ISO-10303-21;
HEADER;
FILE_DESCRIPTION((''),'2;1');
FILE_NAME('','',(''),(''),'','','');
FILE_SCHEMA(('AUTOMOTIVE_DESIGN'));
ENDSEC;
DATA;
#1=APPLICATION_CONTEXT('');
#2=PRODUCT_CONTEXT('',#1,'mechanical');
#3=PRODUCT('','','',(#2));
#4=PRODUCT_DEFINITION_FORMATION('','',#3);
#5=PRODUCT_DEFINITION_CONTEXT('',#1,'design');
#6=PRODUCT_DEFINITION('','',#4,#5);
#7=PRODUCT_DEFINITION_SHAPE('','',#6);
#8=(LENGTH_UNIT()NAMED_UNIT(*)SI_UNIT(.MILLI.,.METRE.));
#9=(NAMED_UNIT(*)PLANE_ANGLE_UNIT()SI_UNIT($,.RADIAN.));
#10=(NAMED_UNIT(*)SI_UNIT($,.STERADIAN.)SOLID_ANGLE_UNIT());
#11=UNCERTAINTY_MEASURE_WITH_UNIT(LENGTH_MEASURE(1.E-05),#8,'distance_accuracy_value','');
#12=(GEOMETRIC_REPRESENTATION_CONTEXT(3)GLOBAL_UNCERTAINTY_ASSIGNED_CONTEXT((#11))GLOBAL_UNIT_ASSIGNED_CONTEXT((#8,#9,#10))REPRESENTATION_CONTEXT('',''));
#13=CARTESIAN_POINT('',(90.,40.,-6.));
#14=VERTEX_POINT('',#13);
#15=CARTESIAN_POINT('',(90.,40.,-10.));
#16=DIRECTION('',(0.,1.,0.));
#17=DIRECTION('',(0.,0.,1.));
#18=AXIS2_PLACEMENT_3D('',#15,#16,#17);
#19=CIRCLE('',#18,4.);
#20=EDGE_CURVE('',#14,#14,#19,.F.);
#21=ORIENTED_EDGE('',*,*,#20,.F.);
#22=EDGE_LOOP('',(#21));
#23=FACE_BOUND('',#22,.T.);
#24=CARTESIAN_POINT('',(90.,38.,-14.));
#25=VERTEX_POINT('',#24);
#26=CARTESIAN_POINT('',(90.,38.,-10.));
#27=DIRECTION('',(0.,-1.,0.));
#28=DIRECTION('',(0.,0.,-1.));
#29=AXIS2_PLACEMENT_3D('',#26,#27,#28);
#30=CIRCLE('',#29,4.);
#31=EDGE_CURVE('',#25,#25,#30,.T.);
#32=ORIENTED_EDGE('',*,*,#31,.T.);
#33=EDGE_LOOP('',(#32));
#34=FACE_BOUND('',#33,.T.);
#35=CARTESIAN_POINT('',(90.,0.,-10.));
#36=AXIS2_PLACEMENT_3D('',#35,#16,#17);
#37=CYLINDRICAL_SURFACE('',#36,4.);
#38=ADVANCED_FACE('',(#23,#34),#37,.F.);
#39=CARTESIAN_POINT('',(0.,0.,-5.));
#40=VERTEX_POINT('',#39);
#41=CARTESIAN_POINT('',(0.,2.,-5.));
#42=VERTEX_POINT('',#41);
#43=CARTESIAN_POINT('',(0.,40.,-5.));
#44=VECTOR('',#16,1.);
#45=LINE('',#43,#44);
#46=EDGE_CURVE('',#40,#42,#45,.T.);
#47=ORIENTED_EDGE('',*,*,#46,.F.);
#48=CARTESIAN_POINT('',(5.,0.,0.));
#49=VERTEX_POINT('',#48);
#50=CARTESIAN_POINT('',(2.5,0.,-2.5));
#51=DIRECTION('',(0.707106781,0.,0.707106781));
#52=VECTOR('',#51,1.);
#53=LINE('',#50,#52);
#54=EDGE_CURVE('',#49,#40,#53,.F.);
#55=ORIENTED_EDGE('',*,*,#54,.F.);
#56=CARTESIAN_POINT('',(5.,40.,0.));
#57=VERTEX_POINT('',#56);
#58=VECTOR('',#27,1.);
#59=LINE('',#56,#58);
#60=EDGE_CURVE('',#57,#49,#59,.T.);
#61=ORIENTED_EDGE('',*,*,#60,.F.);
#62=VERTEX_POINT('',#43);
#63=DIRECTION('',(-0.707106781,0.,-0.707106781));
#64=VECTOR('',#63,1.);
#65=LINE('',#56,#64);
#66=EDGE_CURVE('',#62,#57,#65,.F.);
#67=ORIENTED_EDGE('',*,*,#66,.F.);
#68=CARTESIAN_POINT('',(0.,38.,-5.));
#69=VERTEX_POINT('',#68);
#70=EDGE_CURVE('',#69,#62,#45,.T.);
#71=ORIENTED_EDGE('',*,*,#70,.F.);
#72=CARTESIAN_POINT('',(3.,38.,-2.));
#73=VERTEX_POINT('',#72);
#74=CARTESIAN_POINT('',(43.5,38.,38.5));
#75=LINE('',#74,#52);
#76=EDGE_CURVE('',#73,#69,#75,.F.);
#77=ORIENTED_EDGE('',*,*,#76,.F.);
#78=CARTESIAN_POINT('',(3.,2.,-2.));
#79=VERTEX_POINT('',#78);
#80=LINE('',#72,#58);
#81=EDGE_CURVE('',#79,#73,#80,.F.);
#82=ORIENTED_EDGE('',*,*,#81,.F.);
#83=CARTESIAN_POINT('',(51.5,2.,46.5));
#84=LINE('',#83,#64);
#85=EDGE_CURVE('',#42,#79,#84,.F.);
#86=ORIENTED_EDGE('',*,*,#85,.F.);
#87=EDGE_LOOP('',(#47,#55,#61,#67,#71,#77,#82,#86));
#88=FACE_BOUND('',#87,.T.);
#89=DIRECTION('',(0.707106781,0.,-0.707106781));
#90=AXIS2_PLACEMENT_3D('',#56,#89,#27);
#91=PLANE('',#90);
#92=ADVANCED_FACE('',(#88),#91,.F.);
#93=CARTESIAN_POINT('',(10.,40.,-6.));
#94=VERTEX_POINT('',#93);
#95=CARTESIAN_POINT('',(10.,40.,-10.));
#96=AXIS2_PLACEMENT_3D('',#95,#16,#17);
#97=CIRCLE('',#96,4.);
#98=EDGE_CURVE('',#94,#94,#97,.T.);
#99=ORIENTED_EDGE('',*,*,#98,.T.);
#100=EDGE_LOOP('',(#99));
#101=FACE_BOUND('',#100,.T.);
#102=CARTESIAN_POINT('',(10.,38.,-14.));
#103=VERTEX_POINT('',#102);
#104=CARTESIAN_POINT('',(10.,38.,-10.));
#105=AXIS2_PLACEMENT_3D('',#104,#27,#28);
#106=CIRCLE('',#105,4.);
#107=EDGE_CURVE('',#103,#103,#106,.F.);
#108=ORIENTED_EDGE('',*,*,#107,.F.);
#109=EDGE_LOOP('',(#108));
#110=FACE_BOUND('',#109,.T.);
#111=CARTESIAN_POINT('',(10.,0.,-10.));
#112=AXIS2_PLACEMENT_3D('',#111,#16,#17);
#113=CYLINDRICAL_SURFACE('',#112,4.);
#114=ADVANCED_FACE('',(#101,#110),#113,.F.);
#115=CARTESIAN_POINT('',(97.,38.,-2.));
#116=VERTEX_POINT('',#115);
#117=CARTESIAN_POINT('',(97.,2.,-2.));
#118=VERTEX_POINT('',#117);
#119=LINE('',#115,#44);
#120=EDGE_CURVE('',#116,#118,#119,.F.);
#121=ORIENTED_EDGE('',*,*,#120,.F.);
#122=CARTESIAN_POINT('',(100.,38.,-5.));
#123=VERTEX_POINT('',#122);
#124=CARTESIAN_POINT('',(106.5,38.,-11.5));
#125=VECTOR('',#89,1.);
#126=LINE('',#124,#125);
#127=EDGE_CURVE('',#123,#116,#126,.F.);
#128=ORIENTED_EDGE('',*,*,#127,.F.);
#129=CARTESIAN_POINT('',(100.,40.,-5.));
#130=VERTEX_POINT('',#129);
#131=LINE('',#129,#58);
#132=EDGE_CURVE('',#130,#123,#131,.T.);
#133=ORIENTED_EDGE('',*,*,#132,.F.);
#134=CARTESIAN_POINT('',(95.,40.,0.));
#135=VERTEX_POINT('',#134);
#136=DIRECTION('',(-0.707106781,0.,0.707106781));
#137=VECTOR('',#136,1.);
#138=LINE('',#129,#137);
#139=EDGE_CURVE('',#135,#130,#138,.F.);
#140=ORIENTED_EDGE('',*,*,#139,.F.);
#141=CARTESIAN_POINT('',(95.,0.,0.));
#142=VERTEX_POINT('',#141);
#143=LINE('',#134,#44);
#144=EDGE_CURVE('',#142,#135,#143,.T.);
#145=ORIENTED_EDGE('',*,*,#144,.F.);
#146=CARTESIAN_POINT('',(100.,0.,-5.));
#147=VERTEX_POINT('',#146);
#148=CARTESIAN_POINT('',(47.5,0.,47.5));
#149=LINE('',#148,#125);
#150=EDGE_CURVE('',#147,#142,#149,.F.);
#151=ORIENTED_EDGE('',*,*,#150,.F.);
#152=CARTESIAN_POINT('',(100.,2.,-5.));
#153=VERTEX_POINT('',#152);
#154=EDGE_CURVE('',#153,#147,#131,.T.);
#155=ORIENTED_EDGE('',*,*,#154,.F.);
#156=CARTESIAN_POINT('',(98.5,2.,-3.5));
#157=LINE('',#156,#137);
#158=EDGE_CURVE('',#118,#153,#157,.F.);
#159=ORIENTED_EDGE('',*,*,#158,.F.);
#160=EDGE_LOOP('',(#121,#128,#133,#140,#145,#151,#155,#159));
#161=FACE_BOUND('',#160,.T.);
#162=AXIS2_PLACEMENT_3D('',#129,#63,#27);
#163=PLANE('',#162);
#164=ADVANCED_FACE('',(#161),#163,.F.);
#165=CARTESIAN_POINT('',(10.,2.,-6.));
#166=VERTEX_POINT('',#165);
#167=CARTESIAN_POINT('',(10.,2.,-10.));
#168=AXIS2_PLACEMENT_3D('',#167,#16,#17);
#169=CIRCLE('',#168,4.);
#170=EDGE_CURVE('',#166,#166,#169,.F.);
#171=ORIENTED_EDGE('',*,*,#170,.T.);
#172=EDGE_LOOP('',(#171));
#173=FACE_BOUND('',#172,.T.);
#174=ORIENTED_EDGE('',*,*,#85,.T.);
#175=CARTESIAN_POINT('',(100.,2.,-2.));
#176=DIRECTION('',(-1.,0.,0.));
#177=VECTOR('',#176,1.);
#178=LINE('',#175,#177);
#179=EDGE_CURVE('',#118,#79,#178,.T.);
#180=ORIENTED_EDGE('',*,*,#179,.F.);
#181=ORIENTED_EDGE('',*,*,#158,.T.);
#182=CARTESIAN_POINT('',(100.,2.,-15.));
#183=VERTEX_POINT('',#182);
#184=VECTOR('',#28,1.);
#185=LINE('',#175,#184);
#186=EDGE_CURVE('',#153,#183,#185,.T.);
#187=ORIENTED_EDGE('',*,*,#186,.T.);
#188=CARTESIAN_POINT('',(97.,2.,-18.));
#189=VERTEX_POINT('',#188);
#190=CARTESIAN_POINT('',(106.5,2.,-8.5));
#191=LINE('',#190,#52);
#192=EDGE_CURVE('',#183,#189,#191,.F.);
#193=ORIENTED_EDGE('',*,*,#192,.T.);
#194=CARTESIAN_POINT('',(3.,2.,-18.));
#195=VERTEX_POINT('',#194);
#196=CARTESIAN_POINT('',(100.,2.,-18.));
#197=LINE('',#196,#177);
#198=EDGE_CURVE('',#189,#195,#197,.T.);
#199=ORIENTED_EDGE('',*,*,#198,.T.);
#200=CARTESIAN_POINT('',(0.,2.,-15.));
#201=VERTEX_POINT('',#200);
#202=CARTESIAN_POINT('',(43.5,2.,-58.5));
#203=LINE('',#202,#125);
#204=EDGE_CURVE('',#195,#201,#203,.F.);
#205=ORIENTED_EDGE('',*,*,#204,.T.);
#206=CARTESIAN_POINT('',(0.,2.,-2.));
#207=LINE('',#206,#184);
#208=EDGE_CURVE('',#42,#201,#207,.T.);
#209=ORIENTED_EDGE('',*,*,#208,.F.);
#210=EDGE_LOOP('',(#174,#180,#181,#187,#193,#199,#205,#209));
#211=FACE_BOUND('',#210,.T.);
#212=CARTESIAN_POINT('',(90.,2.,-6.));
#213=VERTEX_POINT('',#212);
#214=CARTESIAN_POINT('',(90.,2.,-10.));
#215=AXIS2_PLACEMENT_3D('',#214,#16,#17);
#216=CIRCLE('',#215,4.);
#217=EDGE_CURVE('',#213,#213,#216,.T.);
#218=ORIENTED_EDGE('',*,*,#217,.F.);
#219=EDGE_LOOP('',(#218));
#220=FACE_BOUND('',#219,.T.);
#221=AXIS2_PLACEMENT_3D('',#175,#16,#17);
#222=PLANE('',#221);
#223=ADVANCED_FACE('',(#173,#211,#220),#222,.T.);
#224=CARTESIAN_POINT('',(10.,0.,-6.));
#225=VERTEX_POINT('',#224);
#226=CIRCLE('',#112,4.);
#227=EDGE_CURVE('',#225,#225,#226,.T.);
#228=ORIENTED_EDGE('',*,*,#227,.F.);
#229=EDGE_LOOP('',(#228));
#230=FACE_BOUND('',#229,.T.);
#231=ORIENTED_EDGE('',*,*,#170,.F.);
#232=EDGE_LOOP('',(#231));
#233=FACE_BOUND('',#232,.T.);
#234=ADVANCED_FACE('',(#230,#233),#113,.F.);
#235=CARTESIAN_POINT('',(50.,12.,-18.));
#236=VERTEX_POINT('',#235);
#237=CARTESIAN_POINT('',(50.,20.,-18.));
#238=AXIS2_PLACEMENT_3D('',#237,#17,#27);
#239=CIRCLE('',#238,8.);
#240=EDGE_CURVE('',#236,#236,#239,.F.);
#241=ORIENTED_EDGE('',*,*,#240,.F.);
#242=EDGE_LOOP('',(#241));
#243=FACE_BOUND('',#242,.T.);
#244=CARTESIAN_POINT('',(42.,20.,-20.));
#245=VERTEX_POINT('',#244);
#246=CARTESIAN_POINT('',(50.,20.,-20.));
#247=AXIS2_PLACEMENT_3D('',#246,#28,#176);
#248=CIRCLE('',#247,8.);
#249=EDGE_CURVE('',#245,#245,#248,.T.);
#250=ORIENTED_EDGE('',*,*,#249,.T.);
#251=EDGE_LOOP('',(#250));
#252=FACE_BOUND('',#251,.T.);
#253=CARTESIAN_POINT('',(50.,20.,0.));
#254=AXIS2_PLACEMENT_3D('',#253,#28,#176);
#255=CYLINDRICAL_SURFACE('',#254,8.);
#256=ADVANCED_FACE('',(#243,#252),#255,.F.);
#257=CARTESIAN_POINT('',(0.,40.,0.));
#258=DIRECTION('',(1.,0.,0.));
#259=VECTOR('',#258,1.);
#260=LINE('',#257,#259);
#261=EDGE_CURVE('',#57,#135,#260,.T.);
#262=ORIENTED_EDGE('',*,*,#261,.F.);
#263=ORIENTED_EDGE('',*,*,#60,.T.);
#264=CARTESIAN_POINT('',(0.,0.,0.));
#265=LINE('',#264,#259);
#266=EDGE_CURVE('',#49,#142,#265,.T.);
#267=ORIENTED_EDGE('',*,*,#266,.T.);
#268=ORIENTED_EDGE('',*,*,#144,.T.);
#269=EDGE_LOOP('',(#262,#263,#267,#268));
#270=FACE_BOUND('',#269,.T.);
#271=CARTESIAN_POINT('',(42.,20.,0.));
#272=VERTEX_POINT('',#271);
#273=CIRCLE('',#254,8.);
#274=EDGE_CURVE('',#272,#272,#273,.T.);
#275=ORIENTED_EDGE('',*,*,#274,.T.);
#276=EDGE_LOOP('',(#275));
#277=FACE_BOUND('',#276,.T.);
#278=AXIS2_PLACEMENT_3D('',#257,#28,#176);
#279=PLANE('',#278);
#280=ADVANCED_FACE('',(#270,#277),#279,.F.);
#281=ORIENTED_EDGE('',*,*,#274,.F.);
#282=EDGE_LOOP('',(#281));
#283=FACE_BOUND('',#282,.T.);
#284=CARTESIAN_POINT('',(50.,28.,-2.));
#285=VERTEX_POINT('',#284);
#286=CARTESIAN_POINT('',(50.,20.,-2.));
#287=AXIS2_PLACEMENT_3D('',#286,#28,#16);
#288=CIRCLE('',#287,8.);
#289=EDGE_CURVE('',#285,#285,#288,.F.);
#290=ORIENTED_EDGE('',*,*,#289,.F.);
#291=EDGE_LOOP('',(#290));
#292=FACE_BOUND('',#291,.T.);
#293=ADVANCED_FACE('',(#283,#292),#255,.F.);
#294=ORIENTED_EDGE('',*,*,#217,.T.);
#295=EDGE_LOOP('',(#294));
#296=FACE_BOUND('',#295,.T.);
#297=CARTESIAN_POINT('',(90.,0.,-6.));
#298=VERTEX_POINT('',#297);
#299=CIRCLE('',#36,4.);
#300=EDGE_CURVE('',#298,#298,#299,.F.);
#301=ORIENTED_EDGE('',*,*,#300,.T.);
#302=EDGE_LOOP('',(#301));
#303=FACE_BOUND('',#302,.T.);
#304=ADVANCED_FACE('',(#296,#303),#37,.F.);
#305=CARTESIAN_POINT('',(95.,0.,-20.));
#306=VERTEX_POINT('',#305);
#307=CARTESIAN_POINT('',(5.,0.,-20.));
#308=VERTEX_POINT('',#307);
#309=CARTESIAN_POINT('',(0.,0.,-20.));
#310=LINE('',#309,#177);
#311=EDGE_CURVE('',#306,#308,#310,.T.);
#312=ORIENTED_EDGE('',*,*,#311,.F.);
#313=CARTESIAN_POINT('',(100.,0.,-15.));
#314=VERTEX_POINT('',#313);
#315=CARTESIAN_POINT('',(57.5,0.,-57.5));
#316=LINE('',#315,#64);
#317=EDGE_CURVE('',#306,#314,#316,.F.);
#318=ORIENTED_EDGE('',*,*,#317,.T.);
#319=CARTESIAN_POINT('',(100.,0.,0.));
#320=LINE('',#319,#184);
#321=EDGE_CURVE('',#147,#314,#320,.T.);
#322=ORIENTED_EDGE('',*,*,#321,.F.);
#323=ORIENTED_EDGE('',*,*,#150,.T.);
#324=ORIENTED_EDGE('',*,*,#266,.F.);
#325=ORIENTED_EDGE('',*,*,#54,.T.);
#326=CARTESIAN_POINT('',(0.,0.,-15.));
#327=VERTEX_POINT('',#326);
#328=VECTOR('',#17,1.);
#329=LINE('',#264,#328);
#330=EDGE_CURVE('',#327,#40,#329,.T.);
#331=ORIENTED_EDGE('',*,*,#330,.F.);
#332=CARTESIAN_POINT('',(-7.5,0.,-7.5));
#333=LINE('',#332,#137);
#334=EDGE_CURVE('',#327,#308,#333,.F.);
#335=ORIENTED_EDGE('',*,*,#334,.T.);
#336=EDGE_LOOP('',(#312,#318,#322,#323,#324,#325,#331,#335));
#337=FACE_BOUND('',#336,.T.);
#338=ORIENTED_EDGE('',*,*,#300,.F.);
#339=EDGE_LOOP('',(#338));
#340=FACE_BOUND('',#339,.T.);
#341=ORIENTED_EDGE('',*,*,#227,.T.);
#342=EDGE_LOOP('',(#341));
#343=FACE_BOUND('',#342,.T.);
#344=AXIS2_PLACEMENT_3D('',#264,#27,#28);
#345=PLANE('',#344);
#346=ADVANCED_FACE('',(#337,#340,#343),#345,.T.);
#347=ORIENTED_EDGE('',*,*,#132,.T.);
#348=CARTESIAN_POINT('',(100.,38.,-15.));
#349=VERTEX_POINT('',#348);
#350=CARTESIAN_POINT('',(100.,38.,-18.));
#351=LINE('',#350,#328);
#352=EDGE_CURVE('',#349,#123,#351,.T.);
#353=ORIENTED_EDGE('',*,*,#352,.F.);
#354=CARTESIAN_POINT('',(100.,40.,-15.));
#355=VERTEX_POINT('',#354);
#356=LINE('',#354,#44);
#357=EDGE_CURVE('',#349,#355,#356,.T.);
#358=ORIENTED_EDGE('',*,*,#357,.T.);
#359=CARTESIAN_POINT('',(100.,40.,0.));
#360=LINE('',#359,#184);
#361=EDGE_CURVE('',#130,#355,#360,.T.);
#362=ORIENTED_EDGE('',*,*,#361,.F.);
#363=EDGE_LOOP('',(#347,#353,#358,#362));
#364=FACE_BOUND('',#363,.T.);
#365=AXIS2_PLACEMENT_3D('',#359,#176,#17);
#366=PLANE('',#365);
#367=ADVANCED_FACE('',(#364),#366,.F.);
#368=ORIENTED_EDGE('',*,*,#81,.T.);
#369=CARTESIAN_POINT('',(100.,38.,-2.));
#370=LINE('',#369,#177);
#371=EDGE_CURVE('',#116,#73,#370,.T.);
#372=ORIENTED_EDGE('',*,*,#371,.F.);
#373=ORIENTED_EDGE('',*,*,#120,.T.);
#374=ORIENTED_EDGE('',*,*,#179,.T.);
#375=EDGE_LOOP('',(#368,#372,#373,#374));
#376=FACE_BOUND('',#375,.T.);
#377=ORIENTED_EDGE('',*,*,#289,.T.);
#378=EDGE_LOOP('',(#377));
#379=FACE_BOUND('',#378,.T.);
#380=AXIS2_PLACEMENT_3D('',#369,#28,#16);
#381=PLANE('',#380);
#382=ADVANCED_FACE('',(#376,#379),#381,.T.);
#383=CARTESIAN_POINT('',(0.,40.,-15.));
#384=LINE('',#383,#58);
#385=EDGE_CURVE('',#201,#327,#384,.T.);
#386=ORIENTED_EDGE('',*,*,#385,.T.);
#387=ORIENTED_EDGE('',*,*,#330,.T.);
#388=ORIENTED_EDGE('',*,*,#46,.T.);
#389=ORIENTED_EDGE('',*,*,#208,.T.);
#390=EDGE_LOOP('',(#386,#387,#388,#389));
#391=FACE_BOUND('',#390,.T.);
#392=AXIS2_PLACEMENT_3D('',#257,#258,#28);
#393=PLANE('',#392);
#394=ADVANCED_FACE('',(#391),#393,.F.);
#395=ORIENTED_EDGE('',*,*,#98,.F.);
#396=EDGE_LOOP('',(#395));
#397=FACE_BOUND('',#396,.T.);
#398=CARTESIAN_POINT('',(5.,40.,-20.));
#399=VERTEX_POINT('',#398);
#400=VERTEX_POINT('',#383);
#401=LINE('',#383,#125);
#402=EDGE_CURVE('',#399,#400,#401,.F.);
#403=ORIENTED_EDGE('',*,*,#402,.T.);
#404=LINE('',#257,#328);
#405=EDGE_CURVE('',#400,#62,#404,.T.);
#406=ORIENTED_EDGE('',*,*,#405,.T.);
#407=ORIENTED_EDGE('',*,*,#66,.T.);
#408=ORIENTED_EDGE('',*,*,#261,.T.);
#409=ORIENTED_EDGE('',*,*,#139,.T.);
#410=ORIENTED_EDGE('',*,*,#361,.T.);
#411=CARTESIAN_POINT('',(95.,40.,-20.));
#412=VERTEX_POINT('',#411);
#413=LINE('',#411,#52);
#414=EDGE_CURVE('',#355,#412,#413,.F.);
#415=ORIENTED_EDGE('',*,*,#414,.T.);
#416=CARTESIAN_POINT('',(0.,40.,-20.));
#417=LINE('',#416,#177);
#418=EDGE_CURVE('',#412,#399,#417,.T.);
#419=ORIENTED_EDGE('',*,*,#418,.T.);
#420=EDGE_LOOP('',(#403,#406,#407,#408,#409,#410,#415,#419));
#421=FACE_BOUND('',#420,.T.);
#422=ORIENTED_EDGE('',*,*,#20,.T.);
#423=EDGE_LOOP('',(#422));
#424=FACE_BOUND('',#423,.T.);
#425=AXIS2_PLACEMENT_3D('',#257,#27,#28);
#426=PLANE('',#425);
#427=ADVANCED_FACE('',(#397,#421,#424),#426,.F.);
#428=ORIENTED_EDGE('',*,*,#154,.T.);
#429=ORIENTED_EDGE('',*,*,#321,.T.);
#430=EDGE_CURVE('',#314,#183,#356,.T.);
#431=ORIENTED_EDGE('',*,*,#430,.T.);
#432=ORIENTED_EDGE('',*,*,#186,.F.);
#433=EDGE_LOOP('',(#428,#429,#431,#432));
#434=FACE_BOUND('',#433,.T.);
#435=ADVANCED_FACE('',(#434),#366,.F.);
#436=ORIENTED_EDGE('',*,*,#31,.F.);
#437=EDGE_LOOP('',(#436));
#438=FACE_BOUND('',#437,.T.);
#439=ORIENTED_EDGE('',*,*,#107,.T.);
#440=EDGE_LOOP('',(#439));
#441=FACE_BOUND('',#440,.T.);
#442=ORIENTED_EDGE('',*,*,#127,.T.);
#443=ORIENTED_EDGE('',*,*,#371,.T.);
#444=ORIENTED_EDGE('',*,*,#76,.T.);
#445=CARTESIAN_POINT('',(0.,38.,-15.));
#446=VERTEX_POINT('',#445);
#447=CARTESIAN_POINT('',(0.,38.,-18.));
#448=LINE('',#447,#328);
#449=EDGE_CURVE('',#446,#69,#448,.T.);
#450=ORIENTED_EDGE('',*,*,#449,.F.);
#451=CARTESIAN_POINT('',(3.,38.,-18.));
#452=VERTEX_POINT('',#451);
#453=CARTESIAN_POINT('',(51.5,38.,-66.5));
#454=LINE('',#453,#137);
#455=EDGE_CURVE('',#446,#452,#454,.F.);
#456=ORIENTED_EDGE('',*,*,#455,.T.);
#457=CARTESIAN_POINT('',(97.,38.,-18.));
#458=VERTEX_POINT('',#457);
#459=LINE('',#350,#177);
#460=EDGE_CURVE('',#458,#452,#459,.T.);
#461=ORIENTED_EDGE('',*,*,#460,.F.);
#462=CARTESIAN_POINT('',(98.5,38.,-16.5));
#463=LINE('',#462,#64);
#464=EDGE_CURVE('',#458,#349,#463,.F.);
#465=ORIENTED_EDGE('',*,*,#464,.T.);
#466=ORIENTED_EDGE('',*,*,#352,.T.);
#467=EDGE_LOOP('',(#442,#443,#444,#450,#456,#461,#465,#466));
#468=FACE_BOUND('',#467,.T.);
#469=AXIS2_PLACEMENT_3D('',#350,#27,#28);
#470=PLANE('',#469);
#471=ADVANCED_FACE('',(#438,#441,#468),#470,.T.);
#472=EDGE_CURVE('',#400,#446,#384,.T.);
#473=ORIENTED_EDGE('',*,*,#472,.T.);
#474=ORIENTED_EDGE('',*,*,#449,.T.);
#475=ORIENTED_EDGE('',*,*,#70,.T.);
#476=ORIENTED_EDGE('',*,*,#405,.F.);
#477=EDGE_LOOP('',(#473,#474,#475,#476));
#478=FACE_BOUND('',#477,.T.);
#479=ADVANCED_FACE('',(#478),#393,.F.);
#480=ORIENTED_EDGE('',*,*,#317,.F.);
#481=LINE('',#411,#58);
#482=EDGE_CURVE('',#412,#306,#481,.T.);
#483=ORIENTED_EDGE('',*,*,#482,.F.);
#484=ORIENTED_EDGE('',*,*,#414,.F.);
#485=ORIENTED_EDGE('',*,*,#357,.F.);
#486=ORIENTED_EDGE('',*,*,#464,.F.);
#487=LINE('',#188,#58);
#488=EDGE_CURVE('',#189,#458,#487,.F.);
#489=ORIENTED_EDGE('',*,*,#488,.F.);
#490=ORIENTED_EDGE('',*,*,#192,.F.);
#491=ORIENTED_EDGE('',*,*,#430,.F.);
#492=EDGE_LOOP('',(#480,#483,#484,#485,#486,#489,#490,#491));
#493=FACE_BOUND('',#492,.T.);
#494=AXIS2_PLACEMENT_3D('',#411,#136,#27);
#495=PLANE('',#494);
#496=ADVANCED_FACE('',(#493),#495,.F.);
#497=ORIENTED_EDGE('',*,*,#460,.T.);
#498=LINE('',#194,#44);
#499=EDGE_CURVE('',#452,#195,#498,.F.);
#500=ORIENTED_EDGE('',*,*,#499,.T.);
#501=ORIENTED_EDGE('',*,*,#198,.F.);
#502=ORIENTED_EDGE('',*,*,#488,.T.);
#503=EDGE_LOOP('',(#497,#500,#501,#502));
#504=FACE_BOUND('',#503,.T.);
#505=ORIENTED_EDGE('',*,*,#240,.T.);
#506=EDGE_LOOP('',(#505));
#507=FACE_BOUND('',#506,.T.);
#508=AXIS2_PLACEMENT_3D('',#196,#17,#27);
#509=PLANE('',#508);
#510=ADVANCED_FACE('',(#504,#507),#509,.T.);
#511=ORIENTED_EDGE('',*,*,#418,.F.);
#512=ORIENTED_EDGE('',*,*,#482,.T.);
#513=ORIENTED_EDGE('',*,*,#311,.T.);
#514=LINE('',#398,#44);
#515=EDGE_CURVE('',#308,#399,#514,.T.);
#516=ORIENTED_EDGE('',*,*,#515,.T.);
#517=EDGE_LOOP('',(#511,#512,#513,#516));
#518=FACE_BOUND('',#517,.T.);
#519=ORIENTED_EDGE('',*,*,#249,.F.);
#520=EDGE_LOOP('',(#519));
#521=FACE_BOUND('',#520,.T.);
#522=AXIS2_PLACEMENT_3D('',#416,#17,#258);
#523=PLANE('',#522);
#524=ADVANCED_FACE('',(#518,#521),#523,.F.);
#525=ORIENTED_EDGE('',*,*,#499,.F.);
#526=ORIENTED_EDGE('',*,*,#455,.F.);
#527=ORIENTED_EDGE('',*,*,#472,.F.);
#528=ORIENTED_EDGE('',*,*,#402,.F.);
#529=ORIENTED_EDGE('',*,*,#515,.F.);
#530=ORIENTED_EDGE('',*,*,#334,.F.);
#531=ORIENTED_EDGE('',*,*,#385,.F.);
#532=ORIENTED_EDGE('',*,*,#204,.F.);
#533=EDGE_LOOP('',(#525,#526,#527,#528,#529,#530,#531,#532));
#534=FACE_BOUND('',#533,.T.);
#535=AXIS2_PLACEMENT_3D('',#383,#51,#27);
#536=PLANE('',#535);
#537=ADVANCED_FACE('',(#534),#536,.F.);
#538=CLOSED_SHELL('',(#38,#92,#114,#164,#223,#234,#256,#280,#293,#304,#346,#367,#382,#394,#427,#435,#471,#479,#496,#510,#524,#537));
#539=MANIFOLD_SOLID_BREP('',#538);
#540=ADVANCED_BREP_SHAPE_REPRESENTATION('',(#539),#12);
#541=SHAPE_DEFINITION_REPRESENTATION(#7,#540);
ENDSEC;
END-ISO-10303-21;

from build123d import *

# Parameters (mm, degrees)
SKETCH1_W           = 100
SKETCH1_H           = 20
BOSS_EXTRUDE1_DEPTH = 40
SKETCH2_R           = 4
CUT_EXTRUDE1_DEPTH  = 110.544511501
SKETCH3_R           = 8
CUT_EXTRUDE2_DEPTH  = 110.544511501
CUT_EXTRUDE3_DEPTH  = 109.480412979
CHAMFER1_SIZE       = 5


with BuildPart() as part:
    # Sketch1 → Boss-Extrude1 (new body)
    with BuildSketch(Plane(origin=(0, 0, 0), x_dir=(1, 0, 0), z_dir=(0, 1, 0))):
        with Locations((50, 10)):
            Rectangle(SKETCH1_W, SKETCH1_H)
    extrude(amount=BOSS_EXTRUDE1_DEPTH)

    # Sketch2 → Cut-Extrude1 (cut, through all)
    with BuildSketch(Plane(origin=(0, 40, 0), x_dir=(1, 0, 0), z_dir=(0, 1, 0))):
        with Locations(Location((10, 10, 0), (0, 0, 270))):
            Circle(SKETCH2_R)
        with Locations(Location((90, 10, 0), (0, 0, 270))):
            Circle(SKETCH2_R)
    extrude(amount=-CUT_EXTRUDE1_DEPTH, mode=Mode.SUBTRACT)

    # Sketch3 → Cut-Extrude2 (cut, through all)
    with BuildSketch(Plane(origin=(0, 0, -20), x_dir=(-1, 0, 0), z_dir=(0, 0, -1))):
        with Locations((-50, 20)):
            Circle(SKETCH3_R)
    extrude(amount=-CUT_EXTRUDE2_DEPTH, mode=Mode.SUBTRACT)

    # 3DSketch1 → Cut-Extrude3 (cut, through all)
    with BuildSketch(Plane(origin=(100, 38, -18), x_dir=(0, -0.913811548620257, 0.4061384660534479), z_dir=(-1, 0, 0))):
        Polygon((0, 0), (6.498215457, 14.620984778), (39.395431207, 0), (32.89721575, -14.620984778), align=None)
    extrude(amount=CUT_EXTRUDE3_DEPTH, mode=Mode.SUBTRACT)

    # Chamfer1
    # the kernel refuses this chamfer: 5 mm, written as the material it takes off along each edge
    with BuildSketch(Plane(origin=(100, -12.85841494, -20), x_dir=(0.0274958766105877, 0, 0.9996219169112968), z_dir=(0, 1, 0)), Plane(origin=(100, -12.85841494, 0), x_dir=(-0.9996219169112968, 0, 0.027495876610586334), z_dir=(0, 1, 0))) as chamfer1_piece_1:
        Polygon((CHAMFER1_SIZE * 0.999621916911, -CHAMFER1_SIZE * 0.0274958766106), (-CHAMFER1_SIZE * 0.0274958766106, -CHAMFER1_SIZE * 0.999621916911), (0, 0), align=None)
    extrude(amount=65.71682988, mode=Mode.SUBTRACT)
    with BuildSketch(Plane(origin=(0, -12.85841494, -20), x_dir=(-0.027495876610586372, 0, 0.9996219169112968), z_dir=(0, 1, 0)), Plane(origin=(0, -12.85841494, 0), x_dir=(0.9996219169112968, 0, 0.027495876610586372), z_dir=(0, 1, 0))) as chamfer1_piece_2:
        Polygon((CHAMFER1_SIZE * 0.999621916911, CHAMFER1_SIZE * 0.0274958766106), (-CHAMFER1_SIZE * 0.0274958766106, CHAMFER1_SIZE * 0.999621916911), (0, 0), align=None)
    extrude(amount=65.71682988, mode=Mode.SUBTRACT)


solid = part.part
